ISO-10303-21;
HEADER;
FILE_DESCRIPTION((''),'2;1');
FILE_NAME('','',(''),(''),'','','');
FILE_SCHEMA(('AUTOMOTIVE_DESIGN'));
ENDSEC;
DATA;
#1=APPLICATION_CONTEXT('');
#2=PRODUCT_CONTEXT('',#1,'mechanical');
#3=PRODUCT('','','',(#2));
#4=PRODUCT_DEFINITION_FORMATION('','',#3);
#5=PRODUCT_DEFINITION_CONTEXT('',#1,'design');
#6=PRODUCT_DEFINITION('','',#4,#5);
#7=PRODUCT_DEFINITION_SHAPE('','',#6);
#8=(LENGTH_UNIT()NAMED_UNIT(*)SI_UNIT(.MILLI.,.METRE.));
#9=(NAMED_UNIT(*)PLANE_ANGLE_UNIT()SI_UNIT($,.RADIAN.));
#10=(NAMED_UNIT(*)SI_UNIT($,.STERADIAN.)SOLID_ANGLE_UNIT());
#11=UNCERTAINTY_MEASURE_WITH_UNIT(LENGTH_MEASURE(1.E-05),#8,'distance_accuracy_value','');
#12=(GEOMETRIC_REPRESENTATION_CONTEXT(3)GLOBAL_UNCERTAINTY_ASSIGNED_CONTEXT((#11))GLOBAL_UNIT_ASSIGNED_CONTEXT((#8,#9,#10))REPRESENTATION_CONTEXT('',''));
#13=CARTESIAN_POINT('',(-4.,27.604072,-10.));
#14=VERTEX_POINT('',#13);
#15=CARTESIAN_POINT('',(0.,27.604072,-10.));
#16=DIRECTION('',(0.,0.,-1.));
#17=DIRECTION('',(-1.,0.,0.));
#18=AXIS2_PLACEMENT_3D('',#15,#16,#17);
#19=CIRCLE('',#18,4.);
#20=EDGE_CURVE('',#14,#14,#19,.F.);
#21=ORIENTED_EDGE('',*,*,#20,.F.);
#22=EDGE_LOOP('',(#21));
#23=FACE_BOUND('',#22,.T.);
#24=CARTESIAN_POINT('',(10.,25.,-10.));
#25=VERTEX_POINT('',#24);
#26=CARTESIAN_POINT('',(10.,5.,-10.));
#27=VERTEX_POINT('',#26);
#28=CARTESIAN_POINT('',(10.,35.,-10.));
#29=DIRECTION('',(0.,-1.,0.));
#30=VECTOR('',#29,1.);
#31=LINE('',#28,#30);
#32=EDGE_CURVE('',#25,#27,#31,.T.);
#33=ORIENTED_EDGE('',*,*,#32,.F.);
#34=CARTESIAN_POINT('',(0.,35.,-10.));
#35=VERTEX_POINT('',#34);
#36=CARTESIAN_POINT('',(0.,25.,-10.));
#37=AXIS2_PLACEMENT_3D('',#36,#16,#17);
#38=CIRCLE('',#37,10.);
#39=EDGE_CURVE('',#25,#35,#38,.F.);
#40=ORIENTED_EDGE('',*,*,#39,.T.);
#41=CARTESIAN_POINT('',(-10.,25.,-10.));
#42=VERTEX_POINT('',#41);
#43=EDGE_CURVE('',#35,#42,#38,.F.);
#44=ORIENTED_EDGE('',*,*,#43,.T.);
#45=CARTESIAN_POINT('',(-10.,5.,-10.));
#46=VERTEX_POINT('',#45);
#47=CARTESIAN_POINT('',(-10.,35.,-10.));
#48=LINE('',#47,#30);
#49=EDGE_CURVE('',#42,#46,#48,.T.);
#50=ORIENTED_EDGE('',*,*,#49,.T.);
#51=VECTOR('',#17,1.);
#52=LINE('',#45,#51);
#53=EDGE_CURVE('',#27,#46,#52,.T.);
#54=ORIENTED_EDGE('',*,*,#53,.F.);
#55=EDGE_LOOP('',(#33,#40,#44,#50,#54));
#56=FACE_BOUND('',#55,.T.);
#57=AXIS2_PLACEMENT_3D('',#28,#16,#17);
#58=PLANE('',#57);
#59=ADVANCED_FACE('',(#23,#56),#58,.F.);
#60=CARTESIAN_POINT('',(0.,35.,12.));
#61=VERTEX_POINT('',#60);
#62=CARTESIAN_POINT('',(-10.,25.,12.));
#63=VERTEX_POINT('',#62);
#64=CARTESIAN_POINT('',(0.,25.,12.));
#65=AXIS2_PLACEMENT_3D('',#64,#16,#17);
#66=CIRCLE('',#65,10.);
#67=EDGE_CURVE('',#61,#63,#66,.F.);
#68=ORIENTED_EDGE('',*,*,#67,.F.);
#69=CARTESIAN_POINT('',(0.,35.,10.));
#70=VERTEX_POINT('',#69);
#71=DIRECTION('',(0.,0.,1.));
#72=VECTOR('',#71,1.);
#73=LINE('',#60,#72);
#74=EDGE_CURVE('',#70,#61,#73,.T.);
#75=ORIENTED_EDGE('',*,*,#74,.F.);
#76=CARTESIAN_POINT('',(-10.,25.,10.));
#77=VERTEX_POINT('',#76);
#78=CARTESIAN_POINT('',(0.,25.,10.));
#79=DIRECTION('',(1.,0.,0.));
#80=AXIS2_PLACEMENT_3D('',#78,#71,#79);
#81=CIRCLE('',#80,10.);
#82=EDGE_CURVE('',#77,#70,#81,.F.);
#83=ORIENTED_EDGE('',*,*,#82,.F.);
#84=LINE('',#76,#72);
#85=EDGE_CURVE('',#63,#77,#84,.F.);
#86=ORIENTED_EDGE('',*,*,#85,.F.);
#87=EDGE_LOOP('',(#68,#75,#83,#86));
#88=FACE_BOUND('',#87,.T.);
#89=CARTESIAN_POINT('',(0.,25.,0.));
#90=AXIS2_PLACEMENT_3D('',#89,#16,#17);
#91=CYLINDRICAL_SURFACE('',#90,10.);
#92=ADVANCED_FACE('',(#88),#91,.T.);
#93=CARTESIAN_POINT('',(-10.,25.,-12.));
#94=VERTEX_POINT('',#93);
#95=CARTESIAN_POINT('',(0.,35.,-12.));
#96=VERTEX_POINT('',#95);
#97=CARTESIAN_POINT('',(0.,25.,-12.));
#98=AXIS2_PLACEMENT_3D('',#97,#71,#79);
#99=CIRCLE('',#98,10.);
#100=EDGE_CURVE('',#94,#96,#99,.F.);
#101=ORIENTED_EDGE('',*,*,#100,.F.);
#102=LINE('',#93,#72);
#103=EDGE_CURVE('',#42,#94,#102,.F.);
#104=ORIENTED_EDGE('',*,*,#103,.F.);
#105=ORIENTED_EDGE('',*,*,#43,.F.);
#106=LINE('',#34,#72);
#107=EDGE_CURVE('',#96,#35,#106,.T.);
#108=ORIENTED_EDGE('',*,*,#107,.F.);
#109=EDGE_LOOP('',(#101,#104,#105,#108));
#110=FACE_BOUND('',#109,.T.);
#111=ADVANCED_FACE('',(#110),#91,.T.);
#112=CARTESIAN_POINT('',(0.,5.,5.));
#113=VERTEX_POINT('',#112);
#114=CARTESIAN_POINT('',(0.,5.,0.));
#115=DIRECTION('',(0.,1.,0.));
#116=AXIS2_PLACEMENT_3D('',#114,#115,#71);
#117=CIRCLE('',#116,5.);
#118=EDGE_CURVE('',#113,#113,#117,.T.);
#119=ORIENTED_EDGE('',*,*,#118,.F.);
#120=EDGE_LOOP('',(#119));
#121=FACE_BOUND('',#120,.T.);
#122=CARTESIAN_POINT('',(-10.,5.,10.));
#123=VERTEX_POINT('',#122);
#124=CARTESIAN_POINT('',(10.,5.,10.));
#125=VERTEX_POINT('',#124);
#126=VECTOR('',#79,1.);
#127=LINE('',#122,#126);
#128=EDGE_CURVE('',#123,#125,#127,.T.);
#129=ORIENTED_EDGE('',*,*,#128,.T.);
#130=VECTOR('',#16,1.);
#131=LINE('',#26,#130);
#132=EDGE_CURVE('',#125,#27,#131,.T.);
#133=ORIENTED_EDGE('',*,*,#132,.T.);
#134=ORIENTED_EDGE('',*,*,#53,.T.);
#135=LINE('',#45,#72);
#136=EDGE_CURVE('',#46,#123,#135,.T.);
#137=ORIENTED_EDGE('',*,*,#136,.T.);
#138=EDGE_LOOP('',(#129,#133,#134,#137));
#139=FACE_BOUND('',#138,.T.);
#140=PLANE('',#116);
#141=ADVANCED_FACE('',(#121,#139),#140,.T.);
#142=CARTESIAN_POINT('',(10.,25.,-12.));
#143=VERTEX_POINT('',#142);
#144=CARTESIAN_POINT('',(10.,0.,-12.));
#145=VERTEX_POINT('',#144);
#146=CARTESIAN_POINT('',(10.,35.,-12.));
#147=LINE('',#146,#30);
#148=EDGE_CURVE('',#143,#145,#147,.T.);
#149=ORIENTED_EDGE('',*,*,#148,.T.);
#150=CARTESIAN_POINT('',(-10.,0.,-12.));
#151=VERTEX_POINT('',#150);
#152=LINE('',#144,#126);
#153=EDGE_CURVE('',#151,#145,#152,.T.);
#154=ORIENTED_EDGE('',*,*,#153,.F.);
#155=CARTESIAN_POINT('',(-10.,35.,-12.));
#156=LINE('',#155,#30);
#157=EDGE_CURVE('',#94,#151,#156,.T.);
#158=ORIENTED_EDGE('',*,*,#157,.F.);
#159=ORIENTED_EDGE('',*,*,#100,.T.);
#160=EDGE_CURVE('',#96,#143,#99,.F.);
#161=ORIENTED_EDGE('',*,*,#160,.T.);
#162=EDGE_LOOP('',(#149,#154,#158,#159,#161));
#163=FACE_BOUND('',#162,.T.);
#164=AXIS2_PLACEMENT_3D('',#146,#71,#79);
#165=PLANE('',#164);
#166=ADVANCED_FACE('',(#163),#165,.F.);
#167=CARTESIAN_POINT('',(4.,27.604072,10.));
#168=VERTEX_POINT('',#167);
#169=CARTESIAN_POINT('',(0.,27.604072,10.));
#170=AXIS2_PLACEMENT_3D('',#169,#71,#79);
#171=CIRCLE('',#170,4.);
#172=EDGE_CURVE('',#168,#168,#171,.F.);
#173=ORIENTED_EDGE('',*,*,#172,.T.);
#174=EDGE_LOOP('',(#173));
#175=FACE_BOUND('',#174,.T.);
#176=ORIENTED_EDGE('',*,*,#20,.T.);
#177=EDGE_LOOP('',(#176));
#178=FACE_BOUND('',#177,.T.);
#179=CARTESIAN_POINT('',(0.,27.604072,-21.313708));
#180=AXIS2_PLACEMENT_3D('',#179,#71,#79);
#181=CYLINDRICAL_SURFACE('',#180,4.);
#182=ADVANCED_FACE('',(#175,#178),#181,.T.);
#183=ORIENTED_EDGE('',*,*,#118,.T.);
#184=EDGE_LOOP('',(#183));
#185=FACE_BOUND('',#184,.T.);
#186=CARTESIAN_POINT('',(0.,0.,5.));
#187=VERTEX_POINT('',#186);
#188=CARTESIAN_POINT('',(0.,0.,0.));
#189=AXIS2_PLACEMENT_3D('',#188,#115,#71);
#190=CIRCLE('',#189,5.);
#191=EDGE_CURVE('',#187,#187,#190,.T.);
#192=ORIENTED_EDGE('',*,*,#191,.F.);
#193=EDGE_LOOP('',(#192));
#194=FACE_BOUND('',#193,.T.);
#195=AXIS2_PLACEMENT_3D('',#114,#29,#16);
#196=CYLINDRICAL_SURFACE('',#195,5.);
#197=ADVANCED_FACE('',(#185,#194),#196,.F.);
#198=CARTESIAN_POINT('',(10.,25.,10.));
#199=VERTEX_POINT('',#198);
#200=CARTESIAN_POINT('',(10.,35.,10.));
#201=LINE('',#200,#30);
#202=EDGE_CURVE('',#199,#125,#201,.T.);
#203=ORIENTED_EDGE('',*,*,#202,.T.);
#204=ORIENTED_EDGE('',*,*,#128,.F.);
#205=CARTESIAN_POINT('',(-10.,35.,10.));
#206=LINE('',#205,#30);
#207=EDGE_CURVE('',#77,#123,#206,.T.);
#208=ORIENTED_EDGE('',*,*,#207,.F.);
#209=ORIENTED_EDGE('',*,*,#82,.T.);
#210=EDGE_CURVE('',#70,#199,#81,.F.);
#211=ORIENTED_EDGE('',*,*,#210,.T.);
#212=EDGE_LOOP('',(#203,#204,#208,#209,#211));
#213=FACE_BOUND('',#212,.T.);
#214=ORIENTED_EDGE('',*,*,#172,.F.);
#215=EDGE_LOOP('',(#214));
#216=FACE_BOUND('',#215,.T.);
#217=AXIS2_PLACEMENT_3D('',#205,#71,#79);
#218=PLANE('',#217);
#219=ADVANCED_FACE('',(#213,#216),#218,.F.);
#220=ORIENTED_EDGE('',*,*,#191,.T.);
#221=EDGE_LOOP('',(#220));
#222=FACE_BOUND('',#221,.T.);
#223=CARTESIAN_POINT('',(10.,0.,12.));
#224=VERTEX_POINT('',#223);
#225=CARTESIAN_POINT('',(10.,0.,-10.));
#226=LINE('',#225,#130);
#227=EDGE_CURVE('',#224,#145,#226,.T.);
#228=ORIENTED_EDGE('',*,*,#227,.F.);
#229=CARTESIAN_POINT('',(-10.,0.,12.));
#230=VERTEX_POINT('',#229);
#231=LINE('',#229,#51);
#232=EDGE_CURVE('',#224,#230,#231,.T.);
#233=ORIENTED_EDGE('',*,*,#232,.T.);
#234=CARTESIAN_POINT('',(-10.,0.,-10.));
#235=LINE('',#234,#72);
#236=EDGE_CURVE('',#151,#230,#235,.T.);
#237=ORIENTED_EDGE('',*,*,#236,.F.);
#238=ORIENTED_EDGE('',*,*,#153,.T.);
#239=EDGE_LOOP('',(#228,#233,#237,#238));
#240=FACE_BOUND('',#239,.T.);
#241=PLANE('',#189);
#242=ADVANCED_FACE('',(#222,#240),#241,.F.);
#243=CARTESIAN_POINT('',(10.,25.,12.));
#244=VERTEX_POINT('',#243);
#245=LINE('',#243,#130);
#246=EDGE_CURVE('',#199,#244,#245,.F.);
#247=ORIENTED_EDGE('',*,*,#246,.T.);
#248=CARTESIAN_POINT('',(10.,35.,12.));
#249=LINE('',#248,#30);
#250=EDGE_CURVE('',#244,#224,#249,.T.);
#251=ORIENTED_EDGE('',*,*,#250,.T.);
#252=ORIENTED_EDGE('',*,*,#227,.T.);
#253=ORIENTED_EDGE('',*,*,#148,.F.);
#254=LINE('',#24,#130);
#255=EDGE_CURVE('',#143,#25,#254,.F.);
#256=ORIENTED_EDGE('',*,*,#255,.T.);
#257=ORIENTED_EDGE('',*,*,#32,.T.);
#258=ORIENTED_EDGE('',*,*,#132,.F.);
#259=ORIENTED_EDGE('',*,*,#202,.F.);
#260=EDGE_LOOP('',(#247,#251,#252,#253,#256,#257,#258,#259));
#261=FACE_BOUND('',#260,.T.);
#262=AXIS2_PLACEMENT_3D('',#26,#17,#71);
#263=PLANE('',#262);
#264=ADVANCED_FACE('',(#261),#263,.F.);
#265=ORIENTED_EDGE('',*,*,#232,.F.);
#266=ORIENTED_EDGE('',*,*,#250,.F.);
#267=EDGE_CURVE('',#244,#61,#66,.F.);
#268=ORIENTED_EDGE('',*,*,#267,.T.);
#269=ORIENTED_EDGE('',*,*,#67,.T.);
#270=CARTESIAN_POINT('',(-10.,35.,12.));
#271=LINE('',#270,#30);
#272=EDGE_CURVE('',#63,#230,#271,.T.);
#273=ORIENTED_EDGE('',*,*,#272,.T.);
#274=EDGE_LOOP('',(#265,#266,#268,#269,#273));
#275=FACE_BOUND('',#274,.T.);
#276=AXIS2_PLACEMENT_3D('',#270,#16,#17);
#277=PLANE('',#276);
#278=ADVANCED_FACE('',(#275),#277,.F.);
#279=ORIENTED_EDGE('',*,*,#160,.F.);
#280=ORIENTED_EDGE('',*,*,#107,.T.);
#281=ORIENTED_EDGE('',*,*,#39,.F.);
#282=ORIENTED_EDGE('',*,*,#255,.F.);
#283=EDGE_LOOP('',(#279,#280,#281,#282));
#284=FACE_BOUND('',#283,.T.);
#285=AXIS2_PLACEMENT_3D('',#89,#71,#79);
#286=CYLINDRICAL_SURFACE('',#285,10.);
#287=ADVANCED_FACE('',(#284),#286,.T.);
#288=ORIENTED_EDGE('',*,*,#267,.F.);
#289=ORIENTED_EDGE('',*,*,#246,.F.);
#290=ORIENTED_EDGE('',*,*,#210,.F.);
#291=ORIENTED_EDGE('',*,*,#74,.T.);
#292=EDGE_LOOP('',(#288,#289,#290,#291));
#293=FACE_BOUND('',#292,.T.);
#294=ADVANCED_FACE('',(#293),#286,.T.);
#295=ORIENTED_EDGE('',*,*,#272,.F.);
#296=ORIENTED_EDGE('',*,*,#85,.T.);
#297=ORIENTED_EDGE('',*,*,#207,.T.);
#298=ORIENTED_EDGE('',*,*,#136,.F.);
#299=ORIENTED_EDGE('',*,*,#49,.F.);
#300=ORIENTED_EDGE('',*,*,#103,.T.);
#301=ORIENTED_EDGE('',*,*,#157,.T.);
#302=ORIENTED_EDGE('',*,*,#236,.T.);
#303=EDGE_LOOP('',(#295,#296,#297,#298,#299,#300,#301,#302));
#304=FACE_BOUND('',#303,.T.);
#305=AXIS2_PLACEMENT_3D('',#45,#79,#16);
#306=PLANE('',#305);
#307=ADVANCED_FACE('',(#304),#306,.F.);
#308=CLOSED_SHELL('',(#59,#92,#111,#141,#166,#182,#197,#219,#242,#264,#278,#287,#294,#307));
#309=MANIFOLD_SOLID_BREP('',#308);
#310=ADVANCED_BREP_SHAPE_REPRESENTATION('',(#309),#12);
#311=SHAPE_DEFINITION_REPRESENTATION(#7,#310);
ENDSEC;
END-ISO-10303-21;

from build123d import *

# Parameters (mm, degrees)
SKETCH1_W                = 20
SKETCH1_H                = 20
SKETCH1_R                = 5
BOSS_EXTRUDE1_DEPTH      = 5
BOSS_EXTRUDE2_DEPTH      = 30
BOSS_EXTRUDE2_DEPTH_BACK = 5
SKETCH2_W                = 20
SKETCH2_H                = 2
FILLET1_R                = 10
SKETCH4_R                = 4
BOSS_EXTRUDE4_DEPTH      = 20


with BuildPart() as part:
    # Sketch1 → Boss-Extrude1 (new body)
    with BuildSketch(Plane(origin=(0, 0, 0), x_dir=(1, 0, 0), z_dir=(0, 1, 0))):
        Rectangle(SKETCH1_W, SKETCH1_H)
        with Locations(Location((0, 0, 0), (0, 0, 270))):
            Circle(SKETCH1_R, mode=Mode.SUBTRACT)
    extrude(amount=BOSS_EXTRUDE1_DEPTH)

    # Sketch2 → Boss-Extrude2 (add, two sides: drawn at the far end of the back side and taken through both)
    with BuildSketch(Plane(origin=(0, 5, 0), x_dir=(1, 0, 0), z_dir=(0, 1, 0)).offset(-BOSS_EXTRUDE2_DEPTH_BACK)):
        with Locations((0, -11)):
            Rectangle(SKETCH2_W, SKETCH2_H)
        with Locations((0, 11)):
            Rectangle(SKETCH2_W, SKETCH2_H)
    extrude(amount=BOSS_EXTRUDE2_DEPTH + BOSS_EXTRUDE2_DEPTH_BACK)

    # Fillet1
    fillet1_edges = [part.edges().sort_by_distance(p)[0] for p in [
        (10, 35, -11),
        (10, 35, 11),
        (-10, 35, 11),
        (-10, 35, -11),
    ]]
    fillet(fillet1_edges, radius=FILLET1_R - 0.0001)  # a hair under: the kernel refuses the full size

    # Sketch4 → Boss-Extrude4 (add)
    with BuildSketch(Plane(origin=(0, 0, 10), x_dir=(-1, 0, 0), z_dir=(0, 0, -1))):
        with Locations(Location((0, 27.604071929, 0), (0, 0, 180))):
            Circle(SKETCH4_R)
    extrude(amount=BOSS_EXTRUDE4_DEPTH)


solid = part.part
